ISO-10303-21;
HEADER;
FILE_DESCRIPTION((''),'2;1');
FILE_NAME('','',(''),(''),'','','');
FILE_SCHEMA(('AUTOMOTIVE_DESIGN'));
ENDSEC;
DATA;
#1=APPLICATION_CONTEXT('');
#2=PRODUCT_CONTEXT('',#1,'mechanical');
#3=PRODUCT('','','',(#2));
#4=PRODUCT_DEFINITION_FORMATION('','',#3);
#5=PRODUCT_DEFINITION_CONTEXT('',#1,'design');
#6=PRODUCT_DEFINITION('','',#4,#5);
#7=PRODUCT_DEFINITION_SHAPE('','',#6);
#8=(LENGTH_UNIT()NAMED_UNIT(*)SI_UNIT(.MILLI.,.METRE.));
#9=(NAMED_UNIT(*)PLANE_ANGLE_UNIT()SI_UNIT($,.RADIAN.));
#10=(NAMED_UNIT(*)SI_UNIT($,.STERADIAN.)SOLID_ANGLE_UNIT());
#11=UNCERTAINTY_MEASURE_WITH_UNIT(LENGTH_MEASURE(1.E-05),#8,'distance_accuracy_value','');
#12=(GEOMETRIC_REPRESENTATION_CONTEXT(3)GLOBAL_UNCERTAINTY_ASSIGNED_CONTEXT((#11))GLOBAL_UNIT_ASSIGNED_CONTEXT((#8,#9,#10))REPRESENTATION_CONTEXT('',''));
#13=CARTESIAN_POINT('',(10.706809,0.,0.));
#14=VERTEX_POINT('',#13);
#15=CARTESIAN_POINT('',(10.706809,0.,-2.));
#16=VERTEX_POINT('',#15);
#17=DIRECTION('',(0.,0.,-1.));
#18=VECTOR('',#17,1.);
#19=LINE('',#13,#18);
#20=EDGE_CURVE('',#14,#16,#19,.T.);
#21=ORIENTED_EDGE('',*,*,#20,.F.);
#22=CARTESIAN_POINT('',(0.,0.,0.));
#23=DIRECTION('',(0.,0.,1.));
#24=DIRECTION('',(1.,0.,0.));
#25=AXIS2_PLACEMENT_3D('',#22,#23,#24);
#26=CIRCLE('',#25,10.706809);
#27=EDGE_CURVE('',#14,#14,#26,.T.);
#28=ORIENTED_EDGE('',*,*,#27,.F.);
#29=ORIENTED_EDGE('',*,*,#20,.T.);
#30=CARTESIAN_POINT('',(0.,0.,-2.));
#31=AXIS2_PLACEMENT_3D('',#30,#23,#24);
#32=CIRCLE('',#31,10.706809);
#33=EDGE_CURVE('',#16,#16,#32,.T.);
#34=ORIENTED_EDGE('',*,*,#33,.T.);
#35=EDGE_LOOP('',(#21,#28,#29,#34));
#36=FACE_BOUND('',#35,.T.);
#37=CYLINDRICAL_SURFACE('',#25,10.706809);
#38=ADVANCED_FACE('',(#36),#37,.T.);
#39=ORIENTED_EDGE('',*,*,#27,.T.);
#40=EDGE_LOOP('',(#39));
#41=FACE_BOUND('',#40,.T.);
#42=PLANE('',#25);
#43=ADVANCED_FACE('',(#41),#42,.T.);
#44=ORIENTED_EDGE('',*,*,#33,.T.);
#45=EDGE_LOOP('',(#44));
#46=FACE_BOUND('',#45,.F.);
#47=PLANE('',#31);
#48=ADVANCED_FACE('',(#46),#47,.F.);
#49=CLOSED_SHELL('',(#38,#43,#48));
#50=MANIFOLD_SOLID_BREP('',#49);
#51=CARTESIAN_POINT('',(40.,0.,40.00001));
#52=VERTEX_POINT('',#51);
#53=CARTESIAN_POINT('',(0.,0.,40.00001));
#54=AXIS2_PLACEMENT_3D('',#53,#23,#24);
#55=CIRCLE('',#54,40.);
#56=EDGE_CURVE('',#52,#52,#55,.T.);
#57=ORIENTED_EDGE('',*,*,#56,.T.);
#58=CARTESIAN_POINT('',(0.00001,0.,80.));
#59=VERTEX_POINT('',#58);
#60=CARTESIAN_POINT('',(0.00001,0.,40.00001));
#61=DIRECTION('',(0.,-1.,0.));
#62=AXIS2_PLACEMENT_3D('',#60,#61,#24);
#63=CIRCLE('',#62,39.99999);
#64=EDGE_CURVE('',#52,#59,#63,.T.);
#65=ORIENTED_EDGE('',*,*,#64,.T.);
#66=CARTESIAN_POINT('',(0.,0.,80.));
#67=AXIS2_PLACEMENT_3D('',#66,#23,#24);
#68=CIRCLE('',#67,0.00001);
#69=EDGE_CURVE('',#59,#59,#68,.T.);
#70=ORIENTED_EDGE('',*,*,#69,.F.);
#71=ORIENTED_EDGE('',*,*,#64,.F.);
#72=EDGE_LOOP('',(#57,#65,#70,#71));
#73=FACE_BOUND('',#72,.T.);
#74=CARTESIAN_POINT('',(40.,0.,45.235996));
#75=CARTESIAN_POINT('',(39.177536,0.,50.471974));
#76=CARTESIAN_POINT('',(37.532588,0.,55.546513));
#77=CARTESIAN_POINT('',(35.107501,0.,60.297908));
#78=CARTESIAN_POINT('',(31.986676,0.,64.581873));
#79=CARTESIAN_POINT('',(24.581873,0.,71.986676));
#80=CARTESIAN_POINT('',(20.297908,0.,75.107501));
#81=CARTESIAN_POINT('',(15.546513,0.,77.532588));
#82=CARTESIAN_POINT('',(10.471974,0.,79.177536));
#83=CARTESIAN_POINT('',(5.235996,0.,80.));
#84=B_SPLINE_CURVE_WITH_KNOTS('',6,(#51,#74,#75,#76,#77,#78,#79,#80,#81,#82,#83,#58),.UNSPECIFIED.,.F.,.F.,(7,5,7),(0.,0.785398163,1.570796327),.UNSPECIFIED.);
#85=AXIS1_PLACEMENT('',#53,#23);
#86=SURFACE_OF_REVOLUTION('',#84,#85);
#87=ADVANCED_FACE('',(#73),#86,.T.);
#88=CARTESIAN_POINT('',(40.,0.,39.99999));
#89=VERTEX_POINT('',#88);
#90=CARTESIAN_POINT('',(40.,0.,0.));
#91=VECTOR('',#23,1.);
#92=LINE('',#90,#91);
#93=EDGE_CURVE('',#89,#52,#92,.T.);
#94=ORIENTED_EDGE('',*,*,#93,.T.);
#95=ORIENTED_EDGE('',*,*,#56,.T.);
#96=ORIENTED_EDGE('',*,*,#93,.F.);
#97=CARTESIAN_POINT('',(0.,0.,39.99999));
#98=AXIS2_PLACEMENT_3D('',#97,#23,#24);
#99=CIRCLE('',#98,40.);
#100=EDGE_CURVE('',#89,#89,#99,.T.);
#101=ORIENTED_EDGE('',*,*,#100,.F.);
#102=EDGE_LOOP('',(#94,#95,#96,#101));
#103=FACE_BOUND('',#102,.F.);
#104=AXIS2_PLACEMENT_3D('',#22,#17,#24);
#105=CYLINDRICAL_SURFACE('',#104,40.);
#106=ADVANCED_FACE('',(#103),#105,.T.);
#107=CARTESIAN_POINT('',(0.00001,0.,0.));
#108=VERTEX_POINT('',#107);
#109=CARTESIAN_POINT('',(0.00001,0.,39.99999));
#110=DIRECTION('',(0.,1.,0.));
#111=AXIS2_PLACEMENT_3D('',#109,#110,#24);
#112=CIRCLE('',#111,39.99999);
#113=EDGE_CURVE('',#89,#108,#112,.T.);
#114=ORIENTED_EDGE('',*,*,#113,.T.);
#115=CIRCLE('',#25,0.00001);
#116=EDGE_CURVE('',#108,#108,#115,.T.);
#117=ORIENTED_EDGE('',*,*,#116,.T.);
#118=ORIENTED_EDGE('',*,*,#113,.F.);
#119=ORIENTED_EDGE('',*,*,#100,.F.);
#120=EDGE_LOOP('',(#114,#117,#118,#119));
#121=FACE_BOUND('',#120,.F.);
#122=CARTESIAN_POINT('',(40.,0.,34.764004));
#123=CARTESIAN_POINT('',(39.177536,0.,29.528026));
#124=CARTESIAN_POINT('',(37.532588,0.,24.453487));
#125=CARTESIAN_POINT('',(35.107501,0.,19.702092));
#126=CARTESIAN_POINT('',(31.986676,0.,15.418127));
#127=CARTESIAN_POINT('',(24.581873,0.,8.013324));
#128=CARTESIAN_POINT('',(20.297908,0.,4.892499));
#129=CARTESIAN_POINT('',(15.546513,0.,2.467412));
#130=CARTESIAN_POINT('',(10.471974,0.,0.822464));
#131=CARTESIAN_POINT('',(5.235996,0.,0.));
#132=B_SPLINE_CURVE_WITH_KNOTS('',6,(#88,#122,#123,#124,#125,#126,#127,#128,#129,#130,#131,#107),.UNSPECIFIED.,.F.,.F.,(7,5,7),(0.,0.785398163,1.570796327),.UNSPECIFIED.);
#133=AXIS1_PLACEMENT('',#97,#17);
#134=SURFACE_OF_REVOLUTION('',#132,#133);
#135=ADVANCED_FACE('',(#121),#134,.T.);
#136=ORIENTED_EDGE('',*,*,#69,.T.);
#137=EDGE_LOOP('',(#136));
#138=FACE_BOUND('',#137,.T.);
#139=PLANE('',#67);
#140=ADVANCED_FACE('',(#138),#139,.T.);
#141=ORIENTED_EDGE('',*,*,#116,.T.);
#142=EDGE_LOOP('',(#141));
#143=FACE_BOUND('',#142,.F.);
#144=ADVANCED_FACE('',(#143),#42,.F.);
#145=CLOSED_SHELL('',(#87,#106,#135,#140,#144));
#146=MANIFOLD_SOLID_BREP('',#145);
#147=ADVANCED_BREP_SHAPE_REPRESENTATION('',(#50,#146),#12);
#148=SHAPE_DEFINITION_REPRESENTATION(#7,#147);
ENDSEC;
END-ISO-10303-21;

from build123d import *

# Parameters (mm, degrees)
F0_R     = 40
F1_DEPTH = 80
F2_R     = 39.99999
F3_R     = 10.7068086525
F4_DEPTH = 2


# Not quite as in the source:
# - a fillet or chamfer is up to 0.001 mm smaller than in the source, because OpenCascade refuses the exact size


with BuildPart() as f1:
    # F0 (on Top) → F1 (new body)
    with BuildSketch(Plane.XY):
        Circle(F0_R)
    extrude(amount=F1_DEPTH)

    # F2 (radius 40 in the source; OpenCascade refuses exactly that, so slightly less here)
    f2_edges = [f1.edges().sort_by_distance(p)[0] for p in [
        (-40, 0, 80),
        (-40, 0, 0),
    ]]
    fillet(f2_edges, radius=F2_R)


with BuildPart() as f4:
    # F3 (on Top) → F4 (new body)
    with BuildSketch(Plane.XY):
        Circle(F3_R)
    extrude(amount=-F4_DEPTH)


solid = Compound([f1.part, f4.part])
